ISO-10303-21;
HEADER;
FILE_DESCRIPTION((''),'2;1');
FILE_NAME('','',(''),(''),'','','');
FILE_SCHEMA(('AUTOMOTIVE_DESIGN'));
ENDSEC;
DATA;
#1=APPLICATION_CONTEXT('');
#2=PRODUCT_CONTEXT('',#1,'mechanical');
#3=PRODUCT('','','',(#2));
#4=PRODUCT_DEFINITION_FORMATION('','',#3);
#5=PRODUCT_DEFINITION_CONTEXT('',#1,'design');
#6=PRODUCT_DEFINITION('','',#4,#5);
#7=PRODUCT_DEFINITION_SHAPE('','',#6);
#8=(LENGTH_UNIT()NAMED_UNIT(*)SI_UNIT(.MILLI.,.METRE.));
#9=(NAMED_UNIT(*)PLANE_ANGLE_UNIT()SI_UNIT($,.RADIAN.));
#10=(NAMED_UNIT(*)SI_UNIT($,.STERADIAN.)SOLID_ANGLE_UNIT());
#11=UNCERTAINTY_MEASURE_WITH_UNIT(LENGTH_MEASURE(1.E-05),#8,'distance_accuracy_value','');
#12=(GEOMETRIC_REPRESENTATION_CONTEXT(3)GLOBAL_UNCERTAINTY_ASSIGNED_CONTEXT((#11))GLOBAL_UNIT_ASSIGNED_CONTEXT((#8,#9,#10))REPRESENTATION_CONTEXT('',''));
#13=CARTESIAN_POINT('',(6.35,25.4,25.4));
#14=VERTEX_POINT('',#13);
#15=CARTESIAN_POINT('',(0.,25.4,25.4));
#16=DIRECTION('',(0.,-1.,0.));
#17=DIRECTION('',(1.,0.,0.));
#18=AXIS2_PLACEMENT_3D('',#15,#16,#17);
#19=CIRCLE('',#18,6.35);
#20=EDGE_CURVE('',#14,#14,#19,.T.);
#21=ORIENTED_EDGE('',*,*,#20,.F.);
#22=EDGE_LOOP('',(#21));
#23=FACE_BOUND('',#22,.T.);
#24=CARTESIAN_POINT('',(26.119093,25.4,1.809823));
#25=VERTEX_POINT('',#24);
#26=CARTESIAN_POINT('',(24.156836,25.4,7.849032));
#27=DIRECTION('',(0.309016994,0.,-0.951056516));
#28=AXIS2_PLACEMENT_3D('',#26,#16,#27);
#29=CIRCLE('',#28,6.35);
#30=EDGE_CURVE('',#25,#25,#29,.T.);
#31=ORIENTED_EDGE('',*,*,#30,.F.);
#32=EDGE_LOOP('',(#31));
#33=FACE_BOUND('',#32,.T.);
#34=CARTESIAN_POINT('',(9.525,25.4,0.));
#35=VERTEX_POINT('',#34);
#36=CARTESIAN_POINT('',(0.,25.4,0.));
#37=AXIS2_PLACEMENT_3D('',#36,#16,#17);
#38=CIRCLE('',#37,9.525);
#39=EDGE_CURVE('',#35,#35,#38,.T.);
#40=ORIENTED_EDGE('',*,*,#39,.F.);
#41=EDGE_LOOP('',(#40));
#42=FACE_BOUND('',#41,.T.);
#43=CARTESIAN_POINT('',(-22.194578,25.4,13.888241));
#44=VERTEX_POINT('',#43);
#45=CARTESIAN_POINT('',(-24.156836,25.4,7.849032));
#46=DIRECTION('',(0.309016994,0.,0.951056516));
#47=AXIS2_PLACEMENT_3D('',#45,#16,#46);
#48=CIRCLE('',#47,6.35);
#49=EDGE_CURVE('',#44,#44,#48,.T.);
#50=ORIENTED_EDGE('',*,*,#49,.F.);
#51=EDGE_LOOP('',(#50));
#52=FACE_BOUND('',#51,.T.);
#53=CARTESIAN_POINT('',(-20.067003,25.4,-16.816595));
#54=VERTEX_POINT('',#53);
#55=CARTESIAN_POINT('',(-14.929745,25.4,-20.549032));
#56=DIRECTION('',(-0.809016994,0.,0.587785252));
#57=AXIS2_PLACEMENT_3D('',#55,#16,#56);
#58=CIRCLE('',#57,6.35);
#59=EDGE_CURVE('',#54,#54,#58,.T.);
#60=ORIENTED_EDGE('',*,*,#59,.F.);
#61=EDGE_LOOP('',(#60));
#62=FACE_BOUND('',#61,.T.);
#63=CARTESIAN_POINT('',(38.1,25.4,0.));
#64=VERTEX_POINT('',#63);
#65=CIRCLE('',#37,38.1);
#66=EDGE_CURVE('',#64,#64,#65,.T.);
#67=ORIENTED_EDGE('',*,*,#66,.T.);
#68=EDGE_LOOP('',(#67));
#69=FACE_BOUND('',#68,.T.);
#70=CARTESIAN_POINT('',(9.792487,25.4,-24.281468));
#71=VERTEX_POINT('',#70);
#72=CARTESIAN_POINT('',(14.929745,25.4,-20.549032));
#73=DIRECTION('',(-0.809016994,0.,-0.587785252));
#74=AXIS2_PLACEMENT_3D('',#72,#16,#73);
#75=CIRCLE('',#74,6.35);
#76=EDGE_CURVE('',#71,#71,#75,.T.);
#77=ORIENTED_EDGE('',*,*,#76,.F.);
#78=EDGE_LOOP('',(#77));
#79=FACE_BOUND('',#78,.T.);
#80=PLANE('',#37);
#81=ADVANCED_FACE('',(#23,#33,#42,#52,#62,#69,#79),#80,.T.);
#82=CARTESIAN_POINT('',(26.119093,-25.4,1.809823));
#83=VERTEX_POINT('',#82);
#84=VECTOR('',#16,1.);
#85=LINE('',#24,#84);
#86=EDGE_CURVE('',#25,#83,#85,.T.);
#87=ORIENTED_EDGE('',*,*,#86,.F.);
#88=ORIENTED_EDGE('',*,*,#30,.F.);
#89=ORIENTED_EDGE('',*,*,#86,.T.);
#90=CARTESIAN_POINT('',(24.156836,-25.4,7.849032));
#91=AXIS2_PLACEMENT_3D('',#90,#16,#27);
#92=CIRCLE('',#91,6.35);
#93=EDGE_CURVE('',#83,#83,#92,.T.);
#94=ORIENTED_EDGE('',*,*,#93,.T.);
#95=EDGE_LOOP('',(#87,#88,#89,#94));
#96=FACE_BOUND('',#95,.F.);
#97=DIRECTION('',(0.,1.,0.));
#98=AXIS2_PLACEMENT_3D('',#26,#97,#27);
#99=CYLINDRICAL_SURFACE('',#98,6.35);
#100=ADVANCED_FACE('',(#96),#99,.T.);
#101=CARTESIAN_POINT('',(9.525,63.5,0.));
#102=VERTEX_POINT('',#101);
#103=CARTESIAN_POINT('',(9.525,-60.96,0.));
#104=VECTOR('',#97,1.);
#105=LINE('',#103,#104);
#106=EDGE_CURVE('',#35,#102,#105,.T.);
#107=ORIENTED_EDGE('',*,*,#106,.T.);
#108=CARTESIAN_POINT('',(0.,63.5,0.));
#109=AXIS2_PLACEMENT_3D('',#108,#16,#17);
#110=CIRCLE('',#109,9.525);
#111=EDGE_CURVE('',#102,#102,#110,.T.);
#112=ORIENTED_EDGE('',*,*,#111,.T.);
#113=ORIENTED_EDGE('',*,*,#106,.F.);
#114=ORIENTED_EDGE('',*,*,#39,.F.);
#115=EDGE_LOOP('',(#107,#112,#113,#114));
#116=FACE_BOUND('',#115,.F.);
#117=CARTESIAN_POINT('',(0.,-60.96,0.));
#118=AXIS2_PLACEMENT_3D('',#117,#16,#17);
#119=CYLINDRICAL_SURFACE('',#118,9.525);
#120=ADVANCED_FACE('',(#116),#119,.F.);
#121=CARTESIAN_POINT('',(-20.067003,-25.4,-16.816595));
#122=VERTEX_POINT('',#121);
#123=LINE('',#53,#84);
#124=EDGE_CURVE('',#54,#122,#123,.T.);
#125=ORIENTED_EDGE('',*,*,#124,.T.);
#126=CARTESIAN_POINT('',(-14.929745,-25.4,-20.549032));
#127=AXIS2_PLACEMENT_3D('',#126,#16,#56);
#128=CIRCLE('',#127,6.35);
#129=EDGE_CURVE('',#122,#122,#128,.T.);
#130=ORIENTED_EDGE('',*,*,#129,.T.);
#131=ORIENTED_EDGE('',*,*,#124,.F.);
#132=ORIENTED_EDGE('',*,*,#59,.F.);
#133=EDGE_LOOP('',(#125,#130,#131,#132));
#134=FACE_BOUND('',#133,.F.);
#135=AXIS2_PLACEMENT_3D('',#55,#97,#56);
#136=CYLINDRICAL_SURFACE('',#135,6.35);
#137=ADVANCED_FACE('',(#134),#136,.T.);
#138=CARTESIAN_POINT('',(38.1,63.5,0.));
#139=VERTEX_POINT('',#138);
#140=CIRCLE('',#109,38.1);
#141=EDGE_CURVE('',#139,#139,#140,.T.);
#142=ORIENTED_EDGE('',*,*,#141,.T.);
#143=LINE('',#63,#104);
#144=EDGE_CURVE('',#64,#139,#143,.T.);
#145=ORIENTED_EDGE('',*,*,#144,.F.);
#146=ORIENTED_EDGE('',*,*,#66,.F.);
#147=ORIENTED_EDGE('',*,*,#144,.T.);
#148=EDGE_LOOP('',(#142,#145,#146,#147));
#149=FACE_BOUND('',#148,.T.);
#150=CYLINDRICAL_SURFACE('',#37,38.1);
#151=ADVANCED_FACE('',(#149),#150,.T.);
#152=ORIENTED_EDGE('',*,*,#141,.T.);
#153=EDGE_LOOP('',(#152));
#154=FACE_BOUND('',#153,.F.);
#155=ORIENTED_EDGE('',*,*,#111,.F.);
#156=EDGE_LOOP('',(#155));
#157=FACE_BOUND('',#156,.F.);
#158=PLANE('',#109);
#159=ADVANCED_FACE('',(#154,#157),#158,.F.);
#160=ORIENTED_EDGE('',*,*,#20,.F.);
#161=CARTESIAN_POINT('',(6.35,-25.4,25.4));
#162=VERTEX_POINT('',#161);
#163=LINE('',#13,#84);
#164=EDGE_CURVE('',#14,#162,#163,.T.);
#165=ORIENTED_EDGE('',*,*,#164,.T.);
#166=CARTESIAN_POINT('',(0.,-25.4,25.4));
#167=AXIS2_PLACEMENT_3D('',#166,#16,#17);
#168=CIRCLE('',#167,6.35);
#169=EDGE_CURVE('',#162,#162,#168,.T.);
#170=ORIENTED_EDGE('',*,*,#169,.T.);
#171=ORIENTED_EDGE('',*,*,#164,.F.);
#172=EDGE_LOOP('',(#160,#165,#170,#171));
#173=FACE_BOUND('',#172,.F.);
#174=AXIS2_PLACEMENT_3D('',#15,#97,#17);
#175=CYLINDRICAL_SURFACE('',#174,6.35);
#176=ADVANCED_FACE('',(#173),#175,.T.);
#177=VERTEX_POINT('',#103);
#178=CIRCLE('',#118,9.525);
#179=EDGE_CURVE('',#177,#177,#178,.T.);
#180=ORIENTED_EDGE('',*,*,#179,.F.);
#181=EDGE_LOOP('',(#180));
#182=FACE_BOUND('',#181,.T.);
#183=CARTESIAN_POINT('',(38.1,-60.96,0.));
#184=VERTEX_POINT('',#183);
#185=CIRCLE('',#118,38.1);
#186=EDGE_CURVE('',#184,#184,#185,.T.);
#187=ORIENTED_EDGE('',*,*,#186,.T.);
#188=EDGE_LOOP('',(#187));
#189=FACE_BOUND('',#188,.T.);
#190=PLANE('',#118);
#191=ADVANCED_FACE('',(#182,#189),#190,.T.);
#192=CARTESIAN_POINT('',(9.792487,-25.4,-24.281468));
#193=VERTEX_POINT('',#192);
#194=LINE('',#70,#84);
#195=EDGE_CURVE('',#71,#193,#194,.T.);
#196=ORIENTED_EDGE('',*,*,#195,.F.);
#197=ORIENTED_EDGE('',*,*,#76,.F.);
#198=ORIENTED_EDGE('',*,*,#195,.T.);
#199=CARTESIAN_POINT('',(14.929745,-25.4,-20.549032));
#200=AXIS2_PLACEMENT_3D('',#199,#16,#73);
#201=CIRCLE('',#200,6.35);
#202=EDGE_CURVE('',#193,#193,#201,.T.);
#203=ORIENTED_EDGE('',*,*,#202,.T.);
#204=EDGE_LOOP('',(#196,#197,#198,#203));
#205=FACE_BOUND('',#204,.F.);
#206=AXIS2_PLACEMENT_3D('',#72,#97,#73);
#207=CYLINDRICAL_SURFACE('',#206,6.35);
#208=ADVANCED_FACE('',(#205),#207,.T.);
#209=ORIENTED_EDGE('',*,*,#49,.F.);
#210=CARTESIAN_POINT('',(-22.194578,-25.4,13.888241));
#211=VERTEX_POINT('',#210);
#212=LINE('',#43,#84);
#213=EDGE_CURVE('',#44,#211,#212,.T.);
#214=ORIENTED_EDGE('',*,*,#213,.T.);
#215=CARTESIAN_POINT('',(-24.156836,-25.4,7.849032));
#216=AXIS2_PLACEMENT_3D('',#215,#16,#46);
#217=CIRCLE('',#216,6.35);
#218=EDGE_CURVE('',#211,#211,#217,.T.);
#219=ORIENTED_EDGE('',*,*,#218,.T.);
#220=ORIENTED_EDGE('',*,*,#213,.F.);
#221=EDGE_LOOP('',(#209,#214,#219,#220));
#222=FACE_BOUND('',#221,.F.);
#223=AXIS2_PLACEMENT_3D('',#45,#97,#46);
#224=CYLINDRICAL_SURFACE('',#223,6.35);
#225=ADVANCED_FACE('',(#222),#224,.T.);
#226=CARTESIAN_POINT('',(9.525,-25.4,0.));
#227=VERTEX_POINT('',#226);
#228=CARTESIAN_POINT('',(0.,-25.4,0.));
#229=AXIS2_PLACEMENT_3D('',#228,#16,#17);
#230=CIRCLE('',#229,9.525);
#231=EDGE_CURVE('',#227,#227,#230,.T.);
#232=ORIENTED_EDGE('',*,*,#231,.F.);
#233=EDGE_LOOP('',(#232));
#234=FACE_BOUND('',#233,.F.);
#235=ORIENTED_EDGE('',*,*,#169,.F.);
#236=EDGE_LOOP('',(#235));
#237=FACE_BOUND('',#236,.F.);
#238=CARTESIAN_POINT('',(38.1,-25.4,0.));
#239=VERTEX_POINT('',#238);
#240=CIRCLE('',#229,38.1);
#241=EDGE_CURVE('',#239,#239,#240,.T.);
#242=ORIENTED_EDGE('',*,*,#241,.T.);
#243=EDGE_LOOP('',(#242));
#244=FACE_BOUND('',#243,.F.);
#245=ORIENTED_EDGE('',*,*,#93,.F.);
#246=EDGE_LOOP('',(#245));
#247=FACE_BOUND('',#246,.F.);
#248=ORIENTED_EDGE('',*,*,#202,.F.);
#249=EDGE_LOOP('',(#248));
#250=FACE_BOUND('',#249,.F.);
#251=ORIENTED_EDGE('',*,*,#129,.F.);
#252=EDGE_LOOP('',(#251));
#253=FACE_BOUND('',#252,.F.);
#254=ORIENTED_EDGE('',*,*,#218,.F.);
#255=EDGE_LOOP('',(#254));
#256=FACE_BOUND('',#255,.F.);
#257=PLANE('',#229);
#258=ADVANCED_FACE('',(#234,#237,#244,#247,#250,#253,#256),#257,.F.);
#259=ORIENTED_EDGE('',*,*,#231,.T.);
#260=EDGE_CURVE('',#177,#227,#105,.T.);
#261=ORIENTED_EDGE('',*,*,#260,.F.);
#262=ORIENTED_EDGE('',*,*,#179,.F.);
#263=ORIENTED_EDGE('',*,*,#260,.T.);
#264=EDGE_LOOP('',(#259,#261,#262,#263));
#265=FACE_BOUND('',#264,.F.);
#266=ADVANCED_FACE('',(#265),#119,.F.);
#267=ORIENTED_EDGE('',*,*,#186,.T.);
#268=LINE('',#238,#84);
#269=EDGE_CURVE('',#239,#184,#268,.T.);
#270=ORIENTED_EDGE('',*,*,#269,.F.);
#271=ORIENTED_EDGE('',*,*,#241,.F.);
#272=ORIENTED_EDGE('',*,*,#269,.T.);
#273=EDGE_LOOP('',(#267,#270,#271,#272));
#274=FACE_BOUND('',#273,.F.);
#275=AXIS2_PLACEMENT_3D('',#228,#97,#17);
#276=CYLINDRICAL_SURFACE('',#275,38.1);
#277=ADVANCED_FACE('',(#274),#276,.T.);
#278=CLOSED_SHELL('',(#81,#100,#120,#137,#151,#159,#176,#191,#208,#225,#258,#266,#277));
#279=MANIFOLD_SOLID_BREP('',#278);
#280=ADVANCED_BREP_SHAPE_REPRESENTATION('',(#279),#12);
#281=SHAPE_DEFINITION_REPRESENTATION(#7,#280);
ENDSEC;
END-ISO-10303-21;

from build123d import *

# Parameters (mm, degrees)
F1_START        = -25.4
F0_R            = 38.1
F1_DEPTH        = 38.1
F2_R            = 6.35
F3_DEPTH        = 50.8
F3_COPIES_COUNT = 5
F4_R            = 38.1
F5_DEPTH        = 35.56
F6_R            = 9.525
F7_DEPTH        = 124.461


# Not quite as in the source:
# - a pattern or mirror of a feature is missing from the dataset's text; its kind, count and spacing are read off the source's solid


with BuildPart() as f1:
    # F0 (on Front) → F1 (new body)
    with BuildSketch(Plane.XZ.offset(F1_START)):
        Circle(F0_R)
    extrude(amount=-F1_DEPTH)

    # F2 (on face) → F3 (join)
    with BuildSketch(Plane.XZ.offset(-25.4)):
        with Locations((0, 25.4)):
            Circle(F2_R)
    f3 = extrude(amount=F3_DEPTH)

    # F3_copies: F3 ×5 about axis
    f3_copies_axis = Axis((0, 0, 0), (0, 1, 0))
    for i in range(1, F3_COPIES_COUNT):
        add(f3.rotate(f3_copies_axis, i * 360 / F3_COPIES_COUNT))

    # F4 (on face) → F5 (join)
    with BuildSketch(Plane.XZ.offset(25.4)):
        Circle(F4_R)
    extrude(amount=F5_DEPTH)

    # F6 (on face) → F7 (cut, through all)
    with BuildSketch(Plane.XZ.offset(60.96)):
        Circle(F6_R)
    extrude(amount=-F7_DEPTH, mode=Mode.SUBTRACT)


solid = f1.part
